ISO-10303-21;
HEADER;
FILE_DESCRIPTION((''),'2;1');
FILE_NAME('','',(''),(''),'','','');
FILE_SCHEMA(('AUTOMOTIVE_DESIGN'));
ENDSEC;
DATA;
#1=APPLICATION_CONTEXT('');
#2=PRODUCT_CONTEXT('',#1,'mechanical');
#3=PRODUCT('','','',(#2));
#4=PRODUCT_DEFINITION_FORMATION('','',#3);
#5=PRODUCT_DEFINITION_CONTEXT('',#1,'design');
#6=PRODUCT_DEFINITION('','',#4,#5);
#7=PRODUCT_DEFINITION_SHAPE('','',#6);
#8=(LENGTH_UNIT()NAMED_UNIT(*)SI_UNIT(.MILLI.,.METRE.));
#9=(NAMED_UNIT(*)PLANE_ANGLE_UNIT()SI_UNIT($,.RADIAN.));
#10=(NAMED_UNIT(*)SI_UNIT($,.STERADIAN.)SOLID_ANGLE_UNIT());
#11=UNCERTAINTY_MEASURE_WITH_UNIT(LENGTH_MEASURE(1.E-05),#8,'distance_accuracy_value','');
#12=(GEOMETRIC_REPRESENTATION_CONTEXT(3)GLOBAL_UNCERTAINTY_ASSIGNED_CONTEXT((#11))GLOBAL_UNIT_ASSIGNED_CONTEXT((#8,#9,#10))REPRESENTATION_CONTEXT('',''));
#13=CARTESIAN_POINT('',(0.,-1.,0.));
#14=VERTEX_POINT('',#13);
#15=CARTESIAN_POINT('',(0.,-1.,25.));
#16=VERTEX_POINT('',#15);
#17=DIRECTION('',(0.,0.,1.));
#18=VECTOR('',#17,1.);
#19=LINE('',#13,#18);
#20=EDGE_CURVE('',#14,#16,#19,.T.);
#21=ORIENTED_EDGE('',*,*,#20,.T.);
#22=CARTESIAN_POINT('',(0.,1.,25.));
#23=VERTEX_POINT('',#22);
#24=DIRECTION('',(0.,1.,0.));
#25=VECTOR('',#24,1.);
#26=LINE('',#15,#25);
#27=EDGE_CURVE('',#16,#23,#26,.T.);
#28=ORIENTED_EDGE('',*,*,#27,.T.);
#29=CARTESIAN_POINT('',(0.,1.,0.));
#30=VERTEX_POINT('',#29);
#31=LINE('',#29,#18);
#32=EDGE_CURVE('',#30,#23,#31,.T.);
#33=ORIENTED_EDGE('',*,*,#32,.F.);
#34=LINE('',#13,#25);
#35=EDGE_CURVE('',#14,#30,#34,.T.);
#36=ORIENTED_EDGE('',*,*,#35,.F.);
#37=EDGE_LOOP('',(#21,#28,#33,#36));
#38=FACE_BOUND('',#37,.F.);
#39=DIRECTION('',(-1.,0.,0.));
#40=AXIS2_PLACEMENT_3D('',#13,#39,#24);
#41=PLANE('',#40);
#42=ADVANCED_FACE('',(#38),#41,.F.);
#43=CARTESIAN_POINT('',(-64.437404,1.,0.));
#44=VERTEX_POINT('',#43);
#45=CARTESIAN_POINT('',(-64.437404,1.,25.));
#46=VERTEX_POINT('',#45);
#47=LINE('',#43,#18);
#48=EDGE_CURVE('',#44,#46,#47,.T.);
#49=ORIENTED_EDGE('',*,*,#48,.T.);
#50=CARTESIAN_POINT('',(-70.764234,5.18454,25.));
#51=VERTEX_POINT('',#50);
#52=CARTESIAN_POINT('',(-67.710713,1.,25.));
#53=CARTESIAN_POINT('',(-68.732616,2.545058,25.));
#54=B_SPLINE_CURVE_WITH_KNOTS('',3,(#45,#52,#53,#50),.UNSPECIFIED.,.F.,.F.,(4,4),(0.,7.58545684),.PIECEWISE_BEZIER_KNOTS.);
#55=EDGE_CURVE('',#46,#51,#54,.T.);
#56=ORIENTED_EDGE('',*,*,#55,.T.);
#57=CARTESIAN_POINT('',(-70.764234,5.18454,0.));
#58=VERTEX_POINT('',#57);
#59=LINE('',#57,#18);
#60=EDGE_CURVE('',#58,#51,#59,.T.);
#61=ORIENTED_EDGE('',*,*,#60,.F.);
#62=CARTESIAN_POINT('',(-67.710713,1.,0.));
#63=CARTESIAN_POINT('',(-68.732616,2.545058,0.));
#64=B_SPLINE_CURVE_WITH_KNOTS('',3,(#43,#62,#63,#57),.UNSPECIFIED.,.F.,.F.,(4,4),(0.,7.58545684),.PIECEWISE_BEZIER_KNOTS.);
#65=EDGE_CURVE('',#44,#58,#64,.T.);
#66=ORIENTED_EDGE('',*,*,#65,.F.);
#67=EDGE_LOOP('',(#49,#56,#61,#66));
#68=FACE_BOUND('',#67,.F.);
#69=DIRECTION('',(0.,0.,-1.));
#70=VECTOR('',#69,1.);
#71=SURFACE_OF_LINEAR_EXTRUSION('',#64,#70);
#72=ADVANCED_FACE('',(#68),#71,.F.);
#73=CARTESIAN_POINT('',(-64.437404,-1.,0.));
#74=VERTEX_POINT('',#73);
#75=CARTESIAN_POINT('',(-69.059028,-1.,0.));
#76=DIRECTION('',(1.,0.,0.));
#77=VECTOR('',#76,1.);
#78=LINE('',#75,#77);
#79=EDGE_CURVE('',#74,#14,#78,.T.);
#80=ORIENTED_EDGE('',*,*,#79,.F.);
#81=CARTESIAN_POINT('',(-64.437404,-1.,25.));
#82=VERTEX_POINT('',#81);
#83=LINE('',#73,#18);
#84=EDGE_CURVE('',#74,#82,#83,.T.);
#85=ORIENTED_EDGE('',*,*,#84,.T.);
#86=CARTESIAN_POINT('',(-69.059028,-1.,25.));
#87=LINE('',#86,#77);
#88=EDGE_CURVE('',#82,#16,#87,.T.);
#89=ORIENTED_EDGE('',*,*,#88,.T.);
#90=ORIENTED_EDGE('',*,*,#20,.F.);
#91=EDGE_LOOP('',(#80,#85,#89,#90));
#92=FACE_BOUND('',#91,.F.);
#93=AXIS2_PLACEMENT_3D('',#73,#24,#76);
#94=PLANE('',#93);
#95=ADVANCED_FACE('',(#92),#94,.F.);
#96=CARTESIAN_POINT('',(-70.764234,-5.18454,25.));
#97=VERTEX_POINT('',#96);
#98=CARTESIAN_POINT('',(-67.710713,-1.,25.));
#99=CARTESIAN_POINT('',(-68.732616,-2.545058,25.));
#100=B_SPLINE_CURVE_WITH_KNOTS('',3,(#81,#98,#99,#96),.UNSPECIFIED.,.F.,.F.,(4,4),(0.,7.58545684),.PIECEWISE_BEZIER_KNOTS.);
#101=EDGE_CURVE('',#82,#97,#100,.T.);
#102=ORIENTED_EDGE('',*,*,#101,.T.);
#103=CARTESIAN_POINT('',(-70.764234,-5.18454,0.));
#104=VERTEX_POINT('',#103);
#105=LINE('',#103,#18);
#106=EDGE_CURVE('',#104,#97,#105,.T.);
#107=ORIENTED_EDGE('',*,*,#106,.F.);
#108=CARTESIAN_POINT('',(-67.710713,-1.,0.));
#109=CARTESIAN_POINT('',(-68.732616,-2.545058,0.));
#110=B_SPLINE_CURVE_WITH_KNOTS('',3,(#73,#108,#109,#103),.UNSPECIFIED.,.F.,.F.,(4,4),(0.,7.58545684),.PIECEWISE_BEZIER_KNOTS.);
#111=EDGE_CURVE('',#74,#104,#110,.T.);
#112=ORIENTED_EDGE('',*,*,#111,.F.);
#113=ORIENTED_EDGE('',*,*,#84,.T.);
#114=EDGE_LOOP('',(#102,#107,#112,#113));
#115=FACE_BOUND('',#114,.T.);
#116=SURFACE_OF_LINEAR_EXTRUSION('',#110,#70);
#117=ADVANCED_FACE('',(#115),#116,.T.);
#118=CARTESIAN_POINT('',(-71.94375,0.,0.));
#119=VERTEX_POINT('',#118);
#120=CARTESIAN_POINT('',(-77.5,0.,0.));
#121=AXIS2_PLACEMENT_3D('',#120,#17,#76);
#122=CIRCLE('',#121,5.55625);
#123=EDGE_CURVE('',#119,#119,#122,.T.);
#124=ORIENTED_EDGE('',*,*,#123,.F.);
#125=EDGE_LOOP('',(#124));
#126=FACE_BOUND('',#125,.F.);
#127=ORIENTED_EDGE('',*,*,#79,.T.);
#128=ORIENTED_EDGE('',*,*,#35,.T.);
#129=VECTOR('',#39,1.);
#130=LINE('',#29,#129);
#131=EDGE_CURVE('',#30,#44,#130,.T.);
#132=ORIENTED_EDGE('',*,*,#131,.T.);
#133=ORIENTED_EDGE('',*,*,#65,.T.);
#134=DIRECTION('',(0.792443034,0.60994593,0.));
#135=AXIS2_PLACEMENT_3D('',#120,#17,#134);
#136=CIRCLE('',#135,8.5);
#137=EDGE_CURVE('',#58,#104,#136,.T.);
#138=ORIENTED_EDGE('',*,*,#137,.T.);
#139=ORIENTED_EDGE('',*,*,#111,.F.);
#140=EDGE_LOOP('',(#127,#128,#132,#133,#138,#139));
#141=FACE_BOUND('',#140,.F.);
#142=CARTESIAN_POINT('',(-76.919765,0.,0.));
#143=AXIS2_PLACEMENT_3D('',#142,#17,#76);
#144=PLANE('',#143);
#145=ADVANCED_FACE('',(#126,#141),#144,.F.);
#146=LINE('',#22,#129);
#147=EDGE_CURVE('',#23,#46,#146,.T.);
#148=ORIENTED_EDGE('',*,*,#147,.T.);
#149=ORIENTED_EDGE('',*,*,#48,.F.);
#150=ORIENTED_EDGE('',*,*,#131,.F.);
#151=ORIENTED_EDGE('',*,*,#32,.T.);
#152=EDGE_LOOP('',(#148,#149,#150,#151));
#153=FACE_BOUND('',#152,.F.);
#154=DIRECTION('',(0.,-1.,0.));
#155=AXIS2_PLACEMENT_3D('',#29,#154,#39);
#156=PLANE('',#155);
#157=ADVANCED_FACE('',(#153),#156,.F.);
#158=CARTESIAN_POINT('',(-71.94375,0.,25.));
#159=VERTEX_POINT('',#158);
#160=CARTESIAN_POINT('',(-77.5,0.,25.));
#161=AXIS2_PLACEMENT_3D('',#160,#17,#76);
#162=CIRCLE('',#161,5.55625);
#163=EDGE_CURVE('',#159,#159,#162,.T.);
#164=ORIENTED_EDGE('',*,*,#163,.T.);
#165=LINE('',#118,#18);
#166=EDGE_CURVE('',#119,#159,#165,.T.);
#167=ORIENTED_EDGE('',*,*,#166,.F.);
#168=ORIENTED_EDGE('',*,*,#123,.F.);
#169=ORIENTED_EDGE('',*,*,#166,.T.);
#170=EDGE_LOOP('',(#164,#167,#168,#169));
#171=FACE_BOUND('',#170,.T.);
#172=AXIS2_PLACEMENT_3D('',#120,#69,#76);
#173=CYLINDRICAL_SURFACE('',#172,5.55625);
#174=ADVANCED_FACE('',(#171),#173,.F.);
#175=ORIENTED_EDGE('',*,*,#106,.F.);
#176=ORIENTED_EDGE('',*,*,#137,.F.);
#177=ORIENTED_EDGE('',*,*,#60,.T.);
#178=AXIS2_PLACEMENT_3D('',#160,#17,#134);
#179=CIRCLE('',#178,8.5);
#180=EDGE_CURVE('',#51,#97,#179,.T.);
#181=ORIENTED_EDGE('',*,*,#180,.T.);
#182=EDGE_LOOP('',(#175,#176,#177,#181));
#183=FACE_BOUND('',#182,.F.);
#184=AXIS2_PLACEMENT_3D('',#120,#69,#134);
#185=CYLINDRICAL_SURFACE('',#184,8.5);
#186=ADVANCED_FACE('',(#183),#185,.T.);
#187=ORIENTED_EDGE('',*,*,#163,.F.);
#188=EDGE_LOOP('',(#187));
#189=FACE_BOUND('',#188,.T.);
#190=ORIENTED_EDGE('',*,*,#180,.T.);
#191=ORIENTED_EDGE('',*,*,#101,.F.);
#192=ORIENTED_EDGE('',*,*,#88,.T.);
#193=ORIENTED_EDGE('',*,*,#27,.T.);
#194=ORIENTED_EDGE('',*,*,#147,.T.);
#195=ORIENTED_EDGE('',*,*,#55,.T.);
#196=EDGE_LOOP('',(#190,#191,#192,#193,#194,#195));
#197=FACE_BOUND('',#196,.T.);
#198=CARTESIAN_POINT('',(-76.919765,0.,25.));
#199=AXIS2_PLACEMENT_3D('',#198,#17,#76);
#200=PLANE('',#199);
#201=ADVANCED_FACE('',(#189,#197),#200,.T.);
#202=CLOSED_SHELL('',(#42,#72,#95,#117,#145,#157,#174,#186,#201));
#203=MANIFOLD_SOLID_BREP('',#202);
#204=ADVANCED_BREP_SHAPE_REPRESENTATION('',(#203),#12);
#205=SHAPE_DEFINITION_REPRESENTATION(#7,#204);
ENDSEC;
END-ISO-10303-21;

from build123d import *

# Parameters (mm, degrees)
F0_R     = 5.55625
F1_DEPTH = 25


# Not quite as in the source:
# - a feature names something its author has since deleted; it is built from what else it names


with BuildPart() as f1:
    # F0 (on Top) → F1 (new body)
    with BuildSketch(Plane.XY):
        with BuildLine():
            ThreePointArc((-69.0590284919, -1), (-69.0147699554, -0.5008703332), (-69, 0))
            ThreePointArc((-69, 0), (-69.0147699554, 0.5008703332), (-69.0590284919, 1))
            ThreePointArc((-69.0590284919, 1), (-69.6284732517, 3.2076575021), (-70.7642342114, 5.184540408))
            ThreePointArc((-70.7642342114, 5.184540408), (-86, 0), (-70.7642342114, -5.184540408))
            ThreePointArc((-70.7642342114, -5.184540408), (-69.6284732517, -3.2076575021), (-69.0590284919, -1))
        make_face()
        with Locations((-77.5, 0)):
            Circle(F0_R, mode=Mode.SUBTRACT)
        with BuildLine():
            ThreePointArc((-70.7642342114, 5.184540408), (-69.6284732517, 3.2076575021), (-69.0590284919, 1))
            Line((-69.0590284919, 1), (-64.4374042749, 1))
            add(Edge.make_bspline(
                [(-64.4374042749, 1), (-67.7107125521, 1), (-68.7326164375, 2.5450583285), (-70.7642342114, 5.184540408)],
                knots=[0, 0, 0, 0, 7.58545684, 7.58545684, 7.58545684, 7.58545684], degree=3))
        make_face()
        with BuildLine():
            Line((-64.4374042749, -1), (-69.0590284919, -1))
            ThreePointArc((-69.0590284919, -1), (-69.6284732517, -3.2076575021), (-70.7642342114, -5.184540408))
            add(Edge.make_bspline(
                [(-64.4374042749, -1), (-67.7107125521, -1), (-68.7326164375, -2.5450583285), (-70.7642342114, -5.184540408)],
                knots=[0, 0, 0, 0, 7.58545684, 7.58545684, 7.58545684, 7.58545684], degree=3))
        make_face()
        with BuildLine():
            ThreePointArc((-69.0590284919, 1), (-69.0147699554, 0.5008703332), (-69, 0))
            ThreePointArc((-69, 0), (-69.0147699554, -0.5008703332), (-69.0590284919, -1))
            Line((-69.0590284919, -1), (-64.4374042749, -1))
            Line((-64.4374042749, -1), (0, -1))
            Line((0, -1), (0, 1))
            Line((0, 1), (-64.4374042749, 1))
            Line((-64.4374042749, 1), (-69.0590284919, 1))
        make_face()
    extrude(amount=F1_DEPTH)


solid = f1.part
